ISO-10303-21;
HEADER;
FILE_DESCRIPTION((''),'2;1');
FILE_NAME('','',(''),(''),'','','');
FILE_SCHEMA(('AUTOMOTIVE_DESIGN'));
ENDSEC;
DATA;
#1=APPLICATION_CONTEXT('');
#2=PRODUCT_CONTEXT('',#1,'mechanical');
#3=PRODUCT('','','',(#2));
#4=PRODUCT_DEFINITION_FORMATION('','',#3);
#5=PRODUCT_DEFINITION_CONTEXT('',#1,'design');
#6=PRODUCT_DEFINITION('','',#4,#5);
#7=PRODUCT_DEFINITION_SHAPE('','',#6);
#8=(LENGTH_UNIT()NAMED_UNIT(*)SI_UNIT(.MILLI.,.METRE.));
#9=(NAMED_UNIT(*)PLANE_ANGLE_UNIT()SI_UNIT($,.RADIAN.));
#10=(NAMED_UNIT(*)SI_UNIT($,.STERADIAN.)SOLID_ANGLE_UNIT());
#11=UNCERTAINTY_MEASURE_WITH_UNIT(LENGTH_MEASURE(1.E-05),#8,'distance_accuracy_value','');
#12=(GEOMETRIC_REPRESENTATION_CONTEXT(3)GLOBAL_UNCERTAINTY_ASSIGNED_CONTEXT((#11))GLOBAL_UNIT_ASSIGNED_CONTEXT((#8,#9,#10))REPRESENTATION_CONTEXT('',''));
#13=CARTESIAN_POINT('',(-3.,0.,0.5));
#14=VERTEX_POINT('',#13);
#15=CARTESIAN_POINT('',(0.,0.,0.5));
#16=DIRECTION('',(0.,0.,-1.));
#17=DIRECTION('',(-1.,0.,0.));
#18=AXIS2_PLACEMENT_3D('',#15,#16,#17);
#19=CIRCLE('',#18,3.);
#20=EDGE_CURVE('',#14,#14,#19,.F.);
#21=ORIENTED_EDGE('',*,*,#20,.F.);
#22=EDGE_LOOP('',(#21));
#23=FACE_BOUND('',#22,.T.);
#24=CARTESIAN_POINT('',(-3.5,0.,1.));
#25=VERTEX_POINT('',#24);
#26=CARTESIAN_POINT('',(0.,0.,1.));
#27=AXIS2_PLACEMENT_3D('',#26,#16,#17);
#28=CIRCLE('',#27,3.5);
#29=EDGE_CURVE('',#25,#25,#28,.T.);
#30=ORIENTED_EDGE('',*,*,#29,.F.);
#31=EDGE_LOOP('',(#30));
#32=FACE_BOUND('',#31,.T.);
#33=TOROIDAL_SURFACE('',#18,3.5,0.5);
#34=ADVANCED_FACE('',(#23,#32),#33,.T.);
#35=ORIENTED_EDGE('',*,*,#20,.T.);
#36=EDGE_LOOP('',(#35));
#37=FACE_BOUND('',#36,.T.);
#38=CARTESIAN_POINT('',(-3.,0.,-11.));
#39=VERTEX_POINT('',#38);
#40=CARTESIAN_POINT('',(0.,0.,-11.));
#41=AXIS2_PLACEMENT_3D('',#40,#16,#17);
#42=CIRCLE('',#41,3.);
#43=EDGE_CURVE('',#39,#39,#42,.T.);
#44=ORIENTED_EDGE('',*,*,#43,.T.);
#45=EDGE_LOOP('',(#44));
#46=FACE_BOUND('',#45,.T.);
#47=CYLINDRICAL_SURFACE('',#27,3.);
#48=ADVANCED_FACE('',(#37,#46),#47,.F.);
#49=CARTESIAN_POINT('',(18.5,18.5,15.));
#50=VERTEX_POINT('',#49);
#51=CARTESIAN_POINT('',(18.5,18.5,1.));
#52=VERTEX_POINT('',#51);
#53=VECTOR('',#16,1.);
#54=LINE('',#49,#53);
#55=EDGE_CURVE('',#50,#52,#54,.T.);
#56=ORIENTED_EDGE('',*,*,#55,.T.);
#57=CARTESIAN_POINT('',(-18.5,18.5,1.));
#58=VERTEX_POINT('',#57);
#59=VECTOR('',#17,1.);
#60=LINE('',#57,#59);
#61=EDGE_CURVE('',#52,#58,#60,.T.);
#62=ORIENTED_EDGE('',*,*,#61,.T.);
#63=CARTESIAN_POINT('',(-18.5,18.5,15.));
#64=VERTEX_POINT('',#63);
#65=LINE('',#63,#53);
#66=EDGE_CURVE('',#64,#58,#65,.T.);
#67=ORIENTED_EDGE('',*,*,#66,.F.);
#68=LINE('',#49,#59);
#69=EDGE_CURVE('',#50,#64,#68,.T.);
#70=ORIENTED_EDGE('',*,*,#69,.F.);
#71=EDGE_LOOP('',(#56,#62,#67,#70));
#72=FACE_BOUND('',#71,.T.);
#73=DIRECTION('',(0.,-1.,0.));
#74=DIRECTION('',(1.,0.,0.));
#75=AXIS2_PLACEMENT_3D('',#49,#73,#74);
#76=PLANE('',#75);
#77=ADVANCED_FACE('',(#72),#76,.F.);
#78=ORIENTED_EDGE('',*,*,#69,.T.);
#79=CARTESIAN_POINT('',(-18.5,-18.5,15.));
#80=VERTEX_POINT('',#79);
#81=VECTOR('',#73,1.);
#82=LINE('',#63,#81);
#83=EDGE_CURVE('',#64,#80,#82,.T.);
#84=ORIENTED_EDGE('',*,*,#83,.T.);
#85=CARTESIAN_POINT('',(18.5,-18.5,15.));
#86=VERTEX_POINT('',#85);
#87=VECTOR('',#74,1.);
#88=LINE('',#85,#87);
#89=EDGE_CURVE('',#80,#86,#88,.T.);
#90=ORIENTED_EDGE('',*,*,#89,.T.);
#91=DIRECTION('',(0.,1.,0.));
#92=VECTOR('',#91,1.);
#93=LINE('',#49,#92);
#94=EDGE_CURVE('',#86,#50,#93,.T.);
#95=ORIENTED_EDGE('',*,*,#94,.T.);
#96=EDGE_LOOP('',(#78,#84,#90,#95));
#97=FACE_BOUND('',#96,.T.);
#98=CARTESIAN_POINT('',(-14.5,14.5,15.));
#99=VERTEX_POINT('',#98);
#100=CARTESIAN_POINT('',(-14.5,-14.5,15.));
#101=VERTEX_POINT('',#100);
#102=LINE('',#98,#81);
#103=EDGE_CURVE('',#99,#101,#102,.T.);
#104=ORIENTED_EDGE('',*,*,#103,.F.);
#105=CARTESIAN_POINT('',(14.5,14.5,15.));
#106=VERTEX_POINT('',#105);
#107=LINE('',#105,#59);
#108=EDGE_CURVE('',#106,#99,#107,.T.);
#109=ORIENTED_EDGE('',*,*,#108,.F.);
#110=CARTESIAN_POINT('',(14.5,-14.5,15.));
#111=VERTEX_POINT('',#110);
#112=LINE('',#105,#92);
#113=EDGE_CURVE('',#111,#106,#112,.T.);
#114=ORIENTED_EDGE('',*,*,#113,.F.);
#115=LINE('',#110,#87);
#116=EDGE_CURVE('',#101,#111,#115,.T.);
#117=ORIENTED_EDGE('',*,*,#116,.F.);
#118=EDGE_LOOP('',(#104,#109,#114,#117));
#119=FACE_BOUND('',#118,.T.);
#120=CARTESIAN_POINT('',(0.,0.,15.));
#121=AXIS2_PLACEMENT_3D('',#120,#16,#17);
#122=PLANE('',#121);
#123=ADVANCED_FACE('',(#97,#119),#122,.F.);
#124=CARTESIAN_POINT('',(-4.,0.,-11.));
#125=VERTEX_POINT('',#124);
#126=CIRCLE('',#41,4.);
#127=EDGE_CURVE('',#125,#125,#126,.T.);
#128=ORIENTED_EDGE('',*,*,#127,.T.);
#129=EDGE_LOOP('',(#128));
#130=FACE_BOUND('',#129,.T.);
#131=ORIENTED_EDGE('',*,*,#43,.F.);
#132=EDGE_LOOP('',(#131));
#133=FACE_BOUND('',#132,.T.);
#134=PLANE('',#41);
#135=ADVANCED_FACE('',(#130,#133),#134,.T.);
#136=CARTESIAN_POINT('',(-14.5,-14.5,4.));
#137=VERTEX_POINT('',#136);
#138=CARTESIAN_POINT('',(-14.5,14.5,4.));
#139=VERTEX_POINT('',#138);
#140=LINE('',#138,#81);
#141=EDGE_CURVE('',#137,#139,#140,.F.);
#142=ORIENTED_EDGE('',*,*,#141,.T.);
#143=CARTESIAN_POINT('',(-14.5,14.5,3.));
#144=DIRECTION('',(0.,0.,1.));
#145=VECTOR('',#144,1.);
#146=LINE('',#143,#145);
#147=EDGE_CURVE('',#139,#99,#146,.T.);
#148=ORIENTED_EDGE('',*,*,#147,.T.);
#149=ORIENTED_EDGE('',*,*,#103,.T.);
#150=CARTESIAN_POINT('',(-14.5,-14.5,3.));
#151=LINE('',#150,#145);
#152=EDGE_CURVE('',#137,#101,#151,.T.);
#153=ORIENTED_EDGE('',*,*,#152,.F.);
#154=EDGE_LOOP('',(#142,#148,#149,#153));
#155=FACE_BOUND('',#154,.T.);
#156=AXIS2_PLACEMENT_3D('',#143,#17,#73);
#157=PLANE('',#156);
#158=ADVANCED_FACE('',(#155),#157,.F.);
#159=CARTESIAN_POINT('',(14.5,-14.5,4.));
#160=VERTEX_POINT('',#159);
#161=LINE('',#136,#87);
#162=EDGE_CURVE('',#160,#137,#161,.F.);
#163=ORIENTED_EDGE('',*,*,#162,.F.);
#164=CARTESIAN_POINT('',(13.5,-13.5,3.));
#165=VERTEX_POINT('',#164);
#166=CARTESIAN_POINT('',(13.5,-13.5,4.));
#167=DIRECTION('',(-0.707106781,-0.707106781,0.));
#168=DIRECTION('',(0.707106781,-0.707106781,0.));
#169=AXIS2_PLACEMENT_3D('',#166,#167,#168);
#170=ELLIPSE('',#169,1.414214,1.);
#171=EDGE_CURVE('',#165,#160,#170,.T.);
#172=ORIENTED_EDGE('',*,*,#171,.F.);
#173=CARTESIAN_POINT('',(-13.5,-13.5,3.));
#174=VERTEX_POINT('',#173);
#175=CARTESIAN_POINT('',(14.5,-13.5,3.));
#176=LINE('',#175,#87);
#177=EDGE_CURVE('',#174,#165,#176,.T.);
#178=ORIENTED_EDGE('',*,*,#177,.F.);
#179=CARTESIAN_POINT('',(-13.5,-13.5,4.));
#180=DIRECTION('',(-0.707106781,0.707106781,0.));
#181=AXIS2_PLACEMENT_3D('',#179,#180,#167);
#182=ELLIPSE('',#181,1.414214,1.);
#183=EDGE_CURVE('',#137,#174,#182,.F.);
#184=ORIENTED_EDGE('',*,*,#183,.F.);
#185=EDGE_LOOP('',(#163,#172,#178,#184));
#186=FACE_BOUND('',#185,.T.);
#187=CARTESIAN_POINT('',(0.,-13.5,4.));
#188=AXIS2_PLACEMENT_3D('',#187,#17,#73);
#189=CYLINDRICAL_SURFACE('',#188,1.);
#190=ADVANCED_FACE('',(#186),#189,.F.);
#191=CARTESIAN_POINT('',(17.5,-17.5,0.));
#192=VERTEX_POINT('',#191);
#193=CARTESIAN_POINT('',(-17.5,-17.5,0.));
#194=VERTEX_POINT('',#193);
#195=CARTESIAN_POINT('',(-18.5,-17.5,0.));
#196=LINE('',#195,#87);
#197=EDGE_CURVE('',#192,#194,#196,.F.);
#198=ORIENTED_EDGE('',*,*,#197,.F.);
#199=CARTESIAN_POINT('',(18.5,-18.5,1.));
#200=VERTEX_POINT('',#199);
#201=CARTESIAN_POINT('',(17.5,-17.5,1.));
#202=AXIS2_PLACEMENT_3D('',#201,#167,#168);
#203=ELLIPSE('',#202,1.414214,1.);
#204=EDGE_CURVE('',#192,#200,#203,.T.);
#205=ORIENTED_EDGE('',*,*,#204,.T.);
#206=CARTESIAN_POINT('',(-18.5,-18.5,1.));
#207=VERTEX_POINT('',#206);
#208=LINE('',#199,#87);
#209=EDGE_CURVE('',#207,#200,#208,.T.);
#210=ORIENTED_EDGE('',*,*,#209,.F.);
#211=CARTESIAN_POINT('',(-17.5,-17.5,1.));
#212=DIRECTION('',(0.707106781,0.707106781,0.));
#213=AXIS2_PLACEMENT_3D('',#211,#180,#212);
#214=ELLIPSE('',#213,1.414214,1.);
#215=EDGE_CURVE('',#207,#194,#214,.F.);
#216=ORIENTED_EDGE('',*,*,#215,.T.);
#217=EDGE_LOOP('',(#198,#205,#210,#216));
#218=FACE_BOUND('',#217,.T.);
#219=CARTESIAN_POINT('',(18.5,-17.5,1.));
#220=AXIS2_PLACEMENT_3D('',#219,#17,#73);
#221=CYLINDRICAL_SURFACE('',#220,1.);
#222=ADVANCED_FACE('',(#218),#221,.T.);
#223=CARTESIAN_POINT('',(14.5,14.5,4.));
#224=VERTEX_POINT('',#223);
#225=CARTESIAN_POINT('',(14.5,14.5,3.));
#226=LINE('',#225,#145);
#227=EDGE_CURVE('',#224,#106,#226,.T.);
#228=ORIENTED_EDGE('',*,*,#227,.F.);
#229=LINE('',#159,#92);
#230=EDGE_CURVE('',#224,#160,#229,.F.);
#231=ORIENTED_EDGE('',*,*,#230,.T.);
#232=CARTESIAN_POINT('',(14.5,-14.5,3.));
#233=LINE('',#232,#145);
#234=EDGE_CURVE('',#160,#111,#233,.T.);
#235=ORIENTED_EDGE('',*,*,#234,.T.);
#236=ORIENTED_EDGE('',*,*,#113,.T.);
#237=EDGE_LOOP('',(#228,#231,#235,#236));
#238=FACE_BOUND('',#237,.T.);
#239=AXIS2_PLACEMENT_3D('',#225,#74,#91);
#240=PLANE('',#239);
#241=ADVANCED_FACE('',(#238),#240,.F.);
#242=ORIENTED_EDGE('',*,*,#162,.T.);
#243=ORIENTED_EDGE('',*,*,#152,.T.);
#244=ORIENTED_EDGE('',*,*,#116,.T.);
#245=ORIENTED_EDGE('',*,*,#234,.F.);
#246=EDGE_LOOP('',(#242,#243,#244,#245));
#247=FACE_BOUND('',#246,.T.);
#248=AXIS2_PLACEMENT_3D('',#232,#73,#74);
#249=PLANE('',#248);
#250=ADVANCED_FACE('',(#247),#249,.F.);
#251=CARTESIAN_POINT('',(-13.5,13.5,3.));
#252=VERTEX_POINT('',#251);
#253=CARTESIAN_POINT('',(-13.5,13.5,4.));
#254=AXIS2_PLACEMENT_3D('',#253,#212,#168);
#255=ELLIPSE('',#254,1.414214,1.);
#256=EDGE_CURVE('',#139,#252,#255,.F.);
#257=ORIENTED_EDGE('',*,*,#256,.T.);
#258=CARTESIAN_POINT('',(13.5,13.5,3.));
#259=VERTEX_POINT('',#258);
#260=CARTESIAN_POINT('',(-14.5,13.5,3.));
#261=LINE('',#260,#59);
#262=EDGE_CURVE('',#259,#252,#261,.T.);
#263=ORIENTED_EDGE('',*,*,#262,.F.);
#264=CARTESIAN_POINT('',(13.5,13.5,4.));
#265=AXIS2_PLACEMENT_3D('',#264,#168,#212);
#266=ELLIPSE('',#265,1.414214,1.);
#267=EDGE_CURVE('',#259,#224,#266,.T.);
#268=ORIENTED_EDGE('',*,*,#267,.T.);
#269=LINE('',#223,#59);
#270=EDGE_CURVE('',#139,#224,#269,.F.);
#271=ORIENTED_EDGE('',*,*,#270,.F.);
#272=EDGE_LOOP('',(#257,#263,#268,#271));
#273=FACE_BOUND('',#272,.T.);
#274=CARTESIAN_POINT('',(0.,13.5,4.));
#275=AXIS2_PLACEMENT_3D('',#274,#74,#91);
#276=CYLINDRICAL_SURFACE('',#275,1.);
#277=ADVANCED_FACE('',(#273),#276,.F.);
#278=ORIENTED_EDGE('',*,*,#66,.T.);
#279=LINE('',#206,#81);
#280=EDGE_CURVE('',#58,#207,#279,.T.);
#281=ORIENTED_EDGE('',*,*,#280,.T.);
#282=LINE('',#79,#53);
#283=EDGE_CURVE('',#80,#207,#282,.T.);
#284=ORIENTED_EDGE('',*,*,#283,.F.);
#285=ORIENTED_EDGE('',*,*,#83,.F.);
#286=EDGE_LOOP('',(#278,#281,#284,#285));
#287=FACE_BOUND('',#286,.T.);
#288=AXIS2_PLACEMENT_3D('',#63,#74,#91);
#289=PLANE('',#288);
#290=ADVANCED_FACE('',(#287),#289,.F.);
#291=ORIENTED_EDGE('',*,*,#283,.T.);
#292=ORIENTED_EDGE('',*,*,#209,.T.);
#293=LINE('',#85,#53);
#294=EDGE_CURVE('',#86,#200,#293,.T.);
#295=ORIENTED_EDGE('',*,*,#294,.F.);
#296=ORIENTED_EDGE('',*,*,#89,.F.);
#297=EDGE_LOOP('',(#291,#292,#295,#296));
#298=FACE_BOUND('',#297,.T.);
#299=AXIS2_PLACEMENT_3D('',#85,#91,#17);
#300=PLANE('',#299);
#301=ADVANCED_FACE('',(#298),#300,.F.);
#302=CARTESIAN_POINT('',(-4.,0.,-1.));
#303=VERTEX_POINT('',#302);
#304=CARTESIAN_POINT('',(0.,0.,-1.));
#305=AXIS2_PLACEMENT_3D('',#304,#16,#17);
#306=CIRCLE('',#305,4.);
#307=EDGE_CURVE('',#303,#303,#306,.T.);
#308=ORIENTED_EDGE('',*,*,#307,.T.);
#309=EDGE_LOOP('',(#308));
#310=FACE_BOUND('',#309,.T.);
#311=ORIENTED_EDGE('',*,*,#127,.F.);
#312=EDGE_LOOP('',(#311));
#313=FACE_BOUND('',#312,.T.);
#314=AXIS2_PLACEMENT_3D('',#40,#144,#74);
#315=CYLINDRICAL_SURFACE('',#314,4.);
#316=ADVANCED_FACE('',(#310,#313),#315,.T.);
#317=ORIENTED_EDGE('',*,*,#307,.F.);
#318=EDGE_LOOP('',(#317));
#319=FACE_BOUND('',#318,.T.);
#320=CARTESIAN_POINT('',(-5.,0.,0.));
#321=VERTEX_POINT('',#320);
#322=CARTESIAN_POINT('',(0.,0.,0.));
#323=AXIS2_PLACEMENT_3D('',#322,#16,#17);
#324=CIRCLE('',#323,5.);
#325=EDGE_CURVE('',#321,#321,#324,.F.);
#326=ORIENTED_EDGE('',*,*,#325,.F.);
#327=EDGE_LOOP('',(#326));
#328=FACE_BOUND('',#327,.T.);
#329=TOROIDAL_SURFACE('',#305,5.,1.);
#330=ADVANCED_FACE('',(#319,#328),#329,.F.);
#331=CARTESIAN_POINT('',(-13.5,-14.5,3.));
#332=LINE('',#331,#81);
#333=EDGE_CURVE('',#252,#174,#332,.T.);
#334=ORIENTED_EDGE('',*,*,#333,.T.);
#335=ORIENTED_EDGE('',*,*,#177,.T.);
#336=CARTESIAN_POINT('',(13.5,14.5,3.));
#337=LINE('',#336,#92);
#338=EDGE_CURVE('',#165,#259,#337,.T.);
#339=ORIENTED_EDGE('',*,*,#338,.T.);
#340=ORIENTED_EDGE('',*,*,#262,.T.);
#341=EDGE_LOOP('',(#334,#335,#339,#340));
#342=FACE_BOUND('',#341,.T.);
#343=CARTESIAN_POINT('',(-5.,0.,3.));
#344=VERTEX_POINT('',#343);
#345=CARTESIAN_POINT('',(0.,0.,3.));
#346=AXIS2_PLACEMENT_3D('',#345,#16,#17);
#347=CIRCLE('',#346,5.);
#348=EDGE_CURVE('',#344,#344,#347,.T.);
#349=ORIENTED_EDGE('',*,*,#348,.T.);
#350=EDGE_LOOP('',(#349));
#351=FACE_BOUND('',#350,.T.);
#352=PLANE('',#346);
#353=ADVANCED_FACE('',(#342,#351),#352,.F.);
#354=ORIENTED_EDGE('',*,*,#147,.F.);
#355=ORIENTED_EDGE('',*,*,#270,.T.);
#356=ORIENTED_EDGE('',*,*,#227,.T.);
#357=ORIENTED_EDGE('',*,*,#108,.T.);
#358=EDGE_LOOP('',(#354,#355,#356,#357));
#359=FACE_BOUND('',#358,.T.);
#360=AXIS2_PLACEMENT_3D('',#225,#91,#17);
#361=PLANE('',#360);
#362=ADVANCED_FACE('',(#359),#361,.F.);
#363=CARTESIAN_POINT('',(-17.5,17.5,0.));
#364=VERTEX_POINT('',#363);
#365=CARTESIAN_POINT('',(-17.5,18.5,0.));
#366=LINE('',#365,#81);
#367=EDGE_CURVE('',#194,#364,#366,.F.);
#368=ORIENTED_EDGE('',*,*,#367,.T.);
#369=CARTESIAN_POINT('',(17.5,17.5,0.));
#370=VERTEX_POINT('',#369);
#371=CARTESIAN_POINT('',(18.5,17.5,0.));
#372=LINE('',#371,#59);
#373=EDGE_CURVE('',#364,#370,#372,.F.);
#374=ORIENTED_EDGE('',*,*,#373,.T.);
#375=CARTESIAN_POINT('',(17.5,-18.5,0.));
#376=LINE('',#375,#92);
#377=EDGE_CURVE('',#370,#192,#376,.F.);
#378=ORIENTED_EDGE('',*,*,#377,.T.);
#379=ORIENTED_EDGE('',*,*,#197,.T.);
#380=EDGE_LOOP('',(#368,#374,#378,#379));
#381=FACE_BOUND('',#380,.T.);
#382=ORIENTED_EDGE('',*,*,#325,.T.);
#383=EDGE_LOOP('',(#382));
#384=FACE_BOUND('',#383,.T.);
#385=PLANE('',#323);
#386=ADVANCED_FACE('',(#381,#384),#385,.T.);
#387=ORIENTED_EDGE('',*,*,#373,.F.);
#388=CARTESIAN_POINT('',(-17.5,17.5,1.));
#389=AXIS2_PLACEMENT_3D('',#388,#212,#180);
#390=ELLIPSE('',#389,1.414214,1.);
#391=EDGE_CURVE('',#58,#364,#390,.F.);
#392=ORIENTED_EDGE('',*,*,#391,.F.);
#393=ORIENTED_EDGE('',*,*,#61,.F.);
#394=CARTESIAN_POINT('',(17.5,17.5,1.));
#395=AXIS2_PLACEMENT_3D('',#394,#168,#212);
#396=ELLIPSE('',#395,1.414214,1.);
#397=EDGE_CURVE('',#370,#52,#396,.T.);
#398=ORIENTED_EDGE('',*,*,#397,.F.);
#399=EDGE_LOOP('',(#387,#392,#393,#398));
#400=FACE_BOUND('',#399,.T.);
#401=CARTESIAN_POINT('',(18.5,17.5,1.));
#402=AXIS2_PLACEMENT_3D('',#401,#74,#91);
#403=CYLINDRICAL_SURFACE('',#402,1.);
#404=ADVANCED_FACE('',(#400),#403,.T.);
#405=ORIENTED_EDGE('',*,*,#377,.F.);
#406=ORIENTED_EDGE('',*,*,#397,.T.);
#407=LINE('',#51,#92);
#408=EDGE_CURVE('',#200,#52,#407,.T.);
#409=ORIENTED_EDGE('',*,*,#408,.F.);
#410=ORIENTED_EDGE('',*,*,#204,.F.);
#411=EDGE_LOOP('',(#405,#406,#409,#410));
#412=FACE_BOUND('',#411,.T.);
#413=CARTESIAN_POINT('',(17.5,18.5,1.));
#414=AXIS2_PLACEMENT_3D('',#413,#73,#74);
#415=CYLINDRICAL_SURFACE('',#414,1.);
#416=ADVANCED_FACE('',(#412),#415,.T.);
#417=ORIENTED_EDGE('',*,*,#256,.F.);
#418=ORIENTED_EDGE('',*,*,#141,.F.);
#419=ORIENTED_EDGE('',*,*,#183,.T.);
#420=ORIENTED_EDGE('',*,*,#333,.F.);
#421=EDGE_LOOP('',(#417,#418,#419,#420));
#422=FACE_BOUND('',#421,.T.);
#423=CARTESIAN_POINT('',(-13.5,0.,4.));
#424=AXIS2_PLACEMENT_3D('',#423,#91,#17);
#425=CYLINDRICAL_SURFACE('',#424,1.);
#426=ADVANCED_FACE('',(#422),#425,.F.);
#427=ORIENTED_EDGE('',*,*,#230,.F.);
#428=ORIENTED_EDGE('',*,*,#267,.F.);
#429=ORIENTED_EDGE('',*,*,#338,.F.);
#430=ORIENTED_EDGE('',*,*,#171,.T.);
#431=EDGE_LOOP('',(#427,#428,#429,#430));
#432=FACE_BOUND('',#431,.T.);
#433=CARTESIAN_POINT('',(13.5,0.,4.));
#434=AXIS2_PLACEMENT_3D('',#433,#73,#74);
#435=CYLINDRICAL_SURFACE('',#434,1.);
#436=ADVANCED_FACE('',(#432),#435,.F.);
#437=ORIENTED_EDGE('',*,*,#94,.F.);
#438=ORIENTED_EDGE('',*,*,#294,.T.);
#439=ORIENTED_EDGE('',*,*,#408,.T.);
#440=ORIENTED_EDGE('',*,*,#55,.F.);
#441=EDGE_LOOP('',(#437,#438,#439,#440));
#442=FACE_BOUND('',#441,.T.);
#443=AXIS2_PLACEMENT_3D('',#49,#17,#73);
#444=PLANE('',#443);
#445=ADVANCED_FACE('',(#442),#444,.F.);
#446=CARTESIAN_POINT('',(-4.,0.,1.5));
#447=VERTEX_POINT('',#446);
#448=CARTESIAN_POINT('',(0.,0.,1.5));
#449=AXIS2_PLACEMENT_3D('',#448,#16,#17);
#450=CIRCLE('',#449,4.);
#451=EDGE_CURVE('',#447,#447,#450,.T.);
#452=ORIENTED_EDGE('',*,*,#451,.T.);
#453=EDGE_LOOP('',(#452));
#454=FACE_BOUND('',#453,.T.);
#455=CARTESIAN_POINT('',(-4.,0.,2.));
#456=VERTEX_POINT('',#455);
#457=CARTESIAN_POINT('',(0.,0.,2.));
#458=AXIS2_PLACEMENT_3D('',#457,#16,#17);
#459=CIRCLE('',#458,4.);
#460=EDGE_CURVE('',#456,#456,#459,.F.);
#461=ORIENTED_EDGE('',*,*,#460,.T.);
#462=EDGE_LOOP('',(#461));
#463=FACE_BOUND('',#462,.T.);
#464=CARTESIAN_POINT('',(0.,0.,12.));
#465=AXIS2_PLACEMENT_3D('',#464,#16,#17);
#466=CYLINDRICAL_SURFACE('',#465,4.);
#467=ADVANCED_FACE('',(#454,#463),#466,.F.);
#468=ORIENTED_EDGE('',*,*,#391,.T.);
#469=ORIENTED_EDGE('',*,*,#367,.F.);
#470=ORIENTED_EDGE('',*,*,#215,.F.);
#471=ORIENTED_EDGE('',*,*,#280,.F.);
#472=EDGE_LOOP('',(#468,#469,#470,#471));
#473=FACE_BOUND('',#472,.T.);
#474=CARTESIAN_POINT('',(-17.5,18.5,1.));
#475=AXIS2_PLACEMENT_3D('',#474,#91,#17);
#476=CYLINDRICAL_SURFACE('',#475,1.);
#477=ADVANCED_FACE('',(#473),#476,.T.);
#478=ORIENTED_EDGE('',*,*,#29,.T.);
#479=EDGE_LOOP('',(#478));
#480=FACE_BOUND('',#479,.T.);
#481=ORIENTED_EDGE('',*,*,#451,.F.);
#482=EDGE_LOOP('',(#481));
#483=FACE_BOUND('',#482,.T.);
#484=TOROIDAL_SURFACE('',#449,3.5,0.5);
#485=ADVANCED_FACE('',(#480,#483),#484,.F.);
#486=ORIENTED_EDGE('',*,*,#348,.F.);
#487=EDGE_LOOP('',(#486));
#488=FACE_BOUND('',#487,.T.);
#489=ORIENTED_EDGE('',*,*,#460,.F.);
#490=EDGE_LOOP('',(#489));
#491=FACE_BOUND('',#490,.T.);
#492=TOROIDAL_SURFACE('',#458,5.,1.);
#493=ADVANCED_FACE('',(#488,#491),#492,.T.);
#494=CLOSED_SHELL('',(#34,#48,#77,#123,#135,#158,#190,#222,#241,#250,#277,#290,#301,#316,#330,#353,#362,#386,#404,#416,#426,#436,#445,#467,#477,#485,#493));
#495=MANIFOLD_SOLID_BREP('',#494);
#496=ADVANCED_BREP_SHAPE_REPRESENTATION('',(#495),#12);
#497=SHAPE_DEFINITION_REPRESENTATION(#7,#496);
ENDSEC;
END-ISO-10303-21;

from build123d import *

# Parameters (mm, degrees)
SKETCH2_W           = 37
SKETCH2_H           = 37
BOSS_EXTRUDE1_DEPTH = 15
SKETCH3_W           = 29
SKETCH3_H           = 29
CUT_EXTRUDE1_DEPTH  = 12
SKETCH4_R           = 4
CUT_EXTRUDE2_DEPTH  = 12
BOSS_EXTRUDE3_START = 12
SKETCH5_R           = 4
BOSS_EXTRUDE3_DEPTH = 12
SKETCH6_R           = 3
CUT_EXTRUDE3_DEPTH  = 12
FILLET3_R           = 1
FILLET4_R           = 1
FILLET6_R           = 0.5


with BuildPart() as part:
    # Sketch2 → Boss-Extrude1 (new body)
    with BuildSketch(Plane.XY):
        Rectangle(SKETCH2_W, SKETCH2_H)
    extrude(amount=BOSS_EXTRUDE1_DEPTH)

    # Sketch3 → Cut-Extrude1 (cut)
    with BuildSketch(Plane.XY.offset(15)):
        Rectangle(SKETCH3_W, SKETCH3_H)
    extrude(amount=-CUT_EXTRUDE1_DEPTH, mode=Mode.SUBTRACT)

    # Sketch4 → Cut-Extrude2 (cut)
    with BuildSketch(Plane(origin=(0, 0, 0), x_dir=(-1, 0, 0), z_dir=(0, 0, -1))):
        Circle(SKETCH4_R)
    extrude(amount=-CUT_EXTRUDE2_DEPTH, mode=Mode.SUBTRACT)

    # Sketch5 → Boss-Extrude3 (add)
    with BuildSketch(Plane(origin=(0, 0, 1), x_dir=(-1, 0, 0), z_dir=(0, 0, -1)).offset(BOSS_EXTRUDE3_START)):
        Circle(SKETCH5_R)
    extrude(amount=-BOSS_EXTRUDE3_DEPTH)

    # Sketch6 → Cut-Extrude3 (cut)
    with BuildSketch(Plane(origin=(0, 0, -11), x_dir=(-1, 0, 0), z_dir=(0, 0, -1))):
        Circle(SKETCH6_R)
    extrude(amount=-CUT_EXTRUDE3_DEPTH, mode=Mode.SUBTRACT)

    # Fillet3
    fillet3_edges = [part.edges().sort_by_distance(p)[0] for p in [
        (4, 0, 0),
        (0, 18.5, 0),
        (18.5, 0, 0),
        (0, -18.5, 0),
        (-18.5, 0, 0),
    ]]
    fillet(fillet3_edges, radius=FILLET3_R)

    # Fillet4
    fillet4_edges = [part.edges().sort_by_distance(p)[0] for p in [
        (-14.5, 0, 3),
        (0, 14.5, 3),
        (14.5, 0, 3),
        (0, -14.5, 3),
        (4, 0, 3),
    ]]
    fillet(fillet4_edges, radius=FILLET4_R)

    # Fillet6
    fillet6_edges = [part.edges().sort_by_distance(p)[0] for p in [
        (4, 0, 1),
        (3, 0, 1),
    ]]
    fillet(fillet6_edges, radius=FILLET6_R - 0.0001)  # a hair under: the kernel refuses the full size


solid = part.part
